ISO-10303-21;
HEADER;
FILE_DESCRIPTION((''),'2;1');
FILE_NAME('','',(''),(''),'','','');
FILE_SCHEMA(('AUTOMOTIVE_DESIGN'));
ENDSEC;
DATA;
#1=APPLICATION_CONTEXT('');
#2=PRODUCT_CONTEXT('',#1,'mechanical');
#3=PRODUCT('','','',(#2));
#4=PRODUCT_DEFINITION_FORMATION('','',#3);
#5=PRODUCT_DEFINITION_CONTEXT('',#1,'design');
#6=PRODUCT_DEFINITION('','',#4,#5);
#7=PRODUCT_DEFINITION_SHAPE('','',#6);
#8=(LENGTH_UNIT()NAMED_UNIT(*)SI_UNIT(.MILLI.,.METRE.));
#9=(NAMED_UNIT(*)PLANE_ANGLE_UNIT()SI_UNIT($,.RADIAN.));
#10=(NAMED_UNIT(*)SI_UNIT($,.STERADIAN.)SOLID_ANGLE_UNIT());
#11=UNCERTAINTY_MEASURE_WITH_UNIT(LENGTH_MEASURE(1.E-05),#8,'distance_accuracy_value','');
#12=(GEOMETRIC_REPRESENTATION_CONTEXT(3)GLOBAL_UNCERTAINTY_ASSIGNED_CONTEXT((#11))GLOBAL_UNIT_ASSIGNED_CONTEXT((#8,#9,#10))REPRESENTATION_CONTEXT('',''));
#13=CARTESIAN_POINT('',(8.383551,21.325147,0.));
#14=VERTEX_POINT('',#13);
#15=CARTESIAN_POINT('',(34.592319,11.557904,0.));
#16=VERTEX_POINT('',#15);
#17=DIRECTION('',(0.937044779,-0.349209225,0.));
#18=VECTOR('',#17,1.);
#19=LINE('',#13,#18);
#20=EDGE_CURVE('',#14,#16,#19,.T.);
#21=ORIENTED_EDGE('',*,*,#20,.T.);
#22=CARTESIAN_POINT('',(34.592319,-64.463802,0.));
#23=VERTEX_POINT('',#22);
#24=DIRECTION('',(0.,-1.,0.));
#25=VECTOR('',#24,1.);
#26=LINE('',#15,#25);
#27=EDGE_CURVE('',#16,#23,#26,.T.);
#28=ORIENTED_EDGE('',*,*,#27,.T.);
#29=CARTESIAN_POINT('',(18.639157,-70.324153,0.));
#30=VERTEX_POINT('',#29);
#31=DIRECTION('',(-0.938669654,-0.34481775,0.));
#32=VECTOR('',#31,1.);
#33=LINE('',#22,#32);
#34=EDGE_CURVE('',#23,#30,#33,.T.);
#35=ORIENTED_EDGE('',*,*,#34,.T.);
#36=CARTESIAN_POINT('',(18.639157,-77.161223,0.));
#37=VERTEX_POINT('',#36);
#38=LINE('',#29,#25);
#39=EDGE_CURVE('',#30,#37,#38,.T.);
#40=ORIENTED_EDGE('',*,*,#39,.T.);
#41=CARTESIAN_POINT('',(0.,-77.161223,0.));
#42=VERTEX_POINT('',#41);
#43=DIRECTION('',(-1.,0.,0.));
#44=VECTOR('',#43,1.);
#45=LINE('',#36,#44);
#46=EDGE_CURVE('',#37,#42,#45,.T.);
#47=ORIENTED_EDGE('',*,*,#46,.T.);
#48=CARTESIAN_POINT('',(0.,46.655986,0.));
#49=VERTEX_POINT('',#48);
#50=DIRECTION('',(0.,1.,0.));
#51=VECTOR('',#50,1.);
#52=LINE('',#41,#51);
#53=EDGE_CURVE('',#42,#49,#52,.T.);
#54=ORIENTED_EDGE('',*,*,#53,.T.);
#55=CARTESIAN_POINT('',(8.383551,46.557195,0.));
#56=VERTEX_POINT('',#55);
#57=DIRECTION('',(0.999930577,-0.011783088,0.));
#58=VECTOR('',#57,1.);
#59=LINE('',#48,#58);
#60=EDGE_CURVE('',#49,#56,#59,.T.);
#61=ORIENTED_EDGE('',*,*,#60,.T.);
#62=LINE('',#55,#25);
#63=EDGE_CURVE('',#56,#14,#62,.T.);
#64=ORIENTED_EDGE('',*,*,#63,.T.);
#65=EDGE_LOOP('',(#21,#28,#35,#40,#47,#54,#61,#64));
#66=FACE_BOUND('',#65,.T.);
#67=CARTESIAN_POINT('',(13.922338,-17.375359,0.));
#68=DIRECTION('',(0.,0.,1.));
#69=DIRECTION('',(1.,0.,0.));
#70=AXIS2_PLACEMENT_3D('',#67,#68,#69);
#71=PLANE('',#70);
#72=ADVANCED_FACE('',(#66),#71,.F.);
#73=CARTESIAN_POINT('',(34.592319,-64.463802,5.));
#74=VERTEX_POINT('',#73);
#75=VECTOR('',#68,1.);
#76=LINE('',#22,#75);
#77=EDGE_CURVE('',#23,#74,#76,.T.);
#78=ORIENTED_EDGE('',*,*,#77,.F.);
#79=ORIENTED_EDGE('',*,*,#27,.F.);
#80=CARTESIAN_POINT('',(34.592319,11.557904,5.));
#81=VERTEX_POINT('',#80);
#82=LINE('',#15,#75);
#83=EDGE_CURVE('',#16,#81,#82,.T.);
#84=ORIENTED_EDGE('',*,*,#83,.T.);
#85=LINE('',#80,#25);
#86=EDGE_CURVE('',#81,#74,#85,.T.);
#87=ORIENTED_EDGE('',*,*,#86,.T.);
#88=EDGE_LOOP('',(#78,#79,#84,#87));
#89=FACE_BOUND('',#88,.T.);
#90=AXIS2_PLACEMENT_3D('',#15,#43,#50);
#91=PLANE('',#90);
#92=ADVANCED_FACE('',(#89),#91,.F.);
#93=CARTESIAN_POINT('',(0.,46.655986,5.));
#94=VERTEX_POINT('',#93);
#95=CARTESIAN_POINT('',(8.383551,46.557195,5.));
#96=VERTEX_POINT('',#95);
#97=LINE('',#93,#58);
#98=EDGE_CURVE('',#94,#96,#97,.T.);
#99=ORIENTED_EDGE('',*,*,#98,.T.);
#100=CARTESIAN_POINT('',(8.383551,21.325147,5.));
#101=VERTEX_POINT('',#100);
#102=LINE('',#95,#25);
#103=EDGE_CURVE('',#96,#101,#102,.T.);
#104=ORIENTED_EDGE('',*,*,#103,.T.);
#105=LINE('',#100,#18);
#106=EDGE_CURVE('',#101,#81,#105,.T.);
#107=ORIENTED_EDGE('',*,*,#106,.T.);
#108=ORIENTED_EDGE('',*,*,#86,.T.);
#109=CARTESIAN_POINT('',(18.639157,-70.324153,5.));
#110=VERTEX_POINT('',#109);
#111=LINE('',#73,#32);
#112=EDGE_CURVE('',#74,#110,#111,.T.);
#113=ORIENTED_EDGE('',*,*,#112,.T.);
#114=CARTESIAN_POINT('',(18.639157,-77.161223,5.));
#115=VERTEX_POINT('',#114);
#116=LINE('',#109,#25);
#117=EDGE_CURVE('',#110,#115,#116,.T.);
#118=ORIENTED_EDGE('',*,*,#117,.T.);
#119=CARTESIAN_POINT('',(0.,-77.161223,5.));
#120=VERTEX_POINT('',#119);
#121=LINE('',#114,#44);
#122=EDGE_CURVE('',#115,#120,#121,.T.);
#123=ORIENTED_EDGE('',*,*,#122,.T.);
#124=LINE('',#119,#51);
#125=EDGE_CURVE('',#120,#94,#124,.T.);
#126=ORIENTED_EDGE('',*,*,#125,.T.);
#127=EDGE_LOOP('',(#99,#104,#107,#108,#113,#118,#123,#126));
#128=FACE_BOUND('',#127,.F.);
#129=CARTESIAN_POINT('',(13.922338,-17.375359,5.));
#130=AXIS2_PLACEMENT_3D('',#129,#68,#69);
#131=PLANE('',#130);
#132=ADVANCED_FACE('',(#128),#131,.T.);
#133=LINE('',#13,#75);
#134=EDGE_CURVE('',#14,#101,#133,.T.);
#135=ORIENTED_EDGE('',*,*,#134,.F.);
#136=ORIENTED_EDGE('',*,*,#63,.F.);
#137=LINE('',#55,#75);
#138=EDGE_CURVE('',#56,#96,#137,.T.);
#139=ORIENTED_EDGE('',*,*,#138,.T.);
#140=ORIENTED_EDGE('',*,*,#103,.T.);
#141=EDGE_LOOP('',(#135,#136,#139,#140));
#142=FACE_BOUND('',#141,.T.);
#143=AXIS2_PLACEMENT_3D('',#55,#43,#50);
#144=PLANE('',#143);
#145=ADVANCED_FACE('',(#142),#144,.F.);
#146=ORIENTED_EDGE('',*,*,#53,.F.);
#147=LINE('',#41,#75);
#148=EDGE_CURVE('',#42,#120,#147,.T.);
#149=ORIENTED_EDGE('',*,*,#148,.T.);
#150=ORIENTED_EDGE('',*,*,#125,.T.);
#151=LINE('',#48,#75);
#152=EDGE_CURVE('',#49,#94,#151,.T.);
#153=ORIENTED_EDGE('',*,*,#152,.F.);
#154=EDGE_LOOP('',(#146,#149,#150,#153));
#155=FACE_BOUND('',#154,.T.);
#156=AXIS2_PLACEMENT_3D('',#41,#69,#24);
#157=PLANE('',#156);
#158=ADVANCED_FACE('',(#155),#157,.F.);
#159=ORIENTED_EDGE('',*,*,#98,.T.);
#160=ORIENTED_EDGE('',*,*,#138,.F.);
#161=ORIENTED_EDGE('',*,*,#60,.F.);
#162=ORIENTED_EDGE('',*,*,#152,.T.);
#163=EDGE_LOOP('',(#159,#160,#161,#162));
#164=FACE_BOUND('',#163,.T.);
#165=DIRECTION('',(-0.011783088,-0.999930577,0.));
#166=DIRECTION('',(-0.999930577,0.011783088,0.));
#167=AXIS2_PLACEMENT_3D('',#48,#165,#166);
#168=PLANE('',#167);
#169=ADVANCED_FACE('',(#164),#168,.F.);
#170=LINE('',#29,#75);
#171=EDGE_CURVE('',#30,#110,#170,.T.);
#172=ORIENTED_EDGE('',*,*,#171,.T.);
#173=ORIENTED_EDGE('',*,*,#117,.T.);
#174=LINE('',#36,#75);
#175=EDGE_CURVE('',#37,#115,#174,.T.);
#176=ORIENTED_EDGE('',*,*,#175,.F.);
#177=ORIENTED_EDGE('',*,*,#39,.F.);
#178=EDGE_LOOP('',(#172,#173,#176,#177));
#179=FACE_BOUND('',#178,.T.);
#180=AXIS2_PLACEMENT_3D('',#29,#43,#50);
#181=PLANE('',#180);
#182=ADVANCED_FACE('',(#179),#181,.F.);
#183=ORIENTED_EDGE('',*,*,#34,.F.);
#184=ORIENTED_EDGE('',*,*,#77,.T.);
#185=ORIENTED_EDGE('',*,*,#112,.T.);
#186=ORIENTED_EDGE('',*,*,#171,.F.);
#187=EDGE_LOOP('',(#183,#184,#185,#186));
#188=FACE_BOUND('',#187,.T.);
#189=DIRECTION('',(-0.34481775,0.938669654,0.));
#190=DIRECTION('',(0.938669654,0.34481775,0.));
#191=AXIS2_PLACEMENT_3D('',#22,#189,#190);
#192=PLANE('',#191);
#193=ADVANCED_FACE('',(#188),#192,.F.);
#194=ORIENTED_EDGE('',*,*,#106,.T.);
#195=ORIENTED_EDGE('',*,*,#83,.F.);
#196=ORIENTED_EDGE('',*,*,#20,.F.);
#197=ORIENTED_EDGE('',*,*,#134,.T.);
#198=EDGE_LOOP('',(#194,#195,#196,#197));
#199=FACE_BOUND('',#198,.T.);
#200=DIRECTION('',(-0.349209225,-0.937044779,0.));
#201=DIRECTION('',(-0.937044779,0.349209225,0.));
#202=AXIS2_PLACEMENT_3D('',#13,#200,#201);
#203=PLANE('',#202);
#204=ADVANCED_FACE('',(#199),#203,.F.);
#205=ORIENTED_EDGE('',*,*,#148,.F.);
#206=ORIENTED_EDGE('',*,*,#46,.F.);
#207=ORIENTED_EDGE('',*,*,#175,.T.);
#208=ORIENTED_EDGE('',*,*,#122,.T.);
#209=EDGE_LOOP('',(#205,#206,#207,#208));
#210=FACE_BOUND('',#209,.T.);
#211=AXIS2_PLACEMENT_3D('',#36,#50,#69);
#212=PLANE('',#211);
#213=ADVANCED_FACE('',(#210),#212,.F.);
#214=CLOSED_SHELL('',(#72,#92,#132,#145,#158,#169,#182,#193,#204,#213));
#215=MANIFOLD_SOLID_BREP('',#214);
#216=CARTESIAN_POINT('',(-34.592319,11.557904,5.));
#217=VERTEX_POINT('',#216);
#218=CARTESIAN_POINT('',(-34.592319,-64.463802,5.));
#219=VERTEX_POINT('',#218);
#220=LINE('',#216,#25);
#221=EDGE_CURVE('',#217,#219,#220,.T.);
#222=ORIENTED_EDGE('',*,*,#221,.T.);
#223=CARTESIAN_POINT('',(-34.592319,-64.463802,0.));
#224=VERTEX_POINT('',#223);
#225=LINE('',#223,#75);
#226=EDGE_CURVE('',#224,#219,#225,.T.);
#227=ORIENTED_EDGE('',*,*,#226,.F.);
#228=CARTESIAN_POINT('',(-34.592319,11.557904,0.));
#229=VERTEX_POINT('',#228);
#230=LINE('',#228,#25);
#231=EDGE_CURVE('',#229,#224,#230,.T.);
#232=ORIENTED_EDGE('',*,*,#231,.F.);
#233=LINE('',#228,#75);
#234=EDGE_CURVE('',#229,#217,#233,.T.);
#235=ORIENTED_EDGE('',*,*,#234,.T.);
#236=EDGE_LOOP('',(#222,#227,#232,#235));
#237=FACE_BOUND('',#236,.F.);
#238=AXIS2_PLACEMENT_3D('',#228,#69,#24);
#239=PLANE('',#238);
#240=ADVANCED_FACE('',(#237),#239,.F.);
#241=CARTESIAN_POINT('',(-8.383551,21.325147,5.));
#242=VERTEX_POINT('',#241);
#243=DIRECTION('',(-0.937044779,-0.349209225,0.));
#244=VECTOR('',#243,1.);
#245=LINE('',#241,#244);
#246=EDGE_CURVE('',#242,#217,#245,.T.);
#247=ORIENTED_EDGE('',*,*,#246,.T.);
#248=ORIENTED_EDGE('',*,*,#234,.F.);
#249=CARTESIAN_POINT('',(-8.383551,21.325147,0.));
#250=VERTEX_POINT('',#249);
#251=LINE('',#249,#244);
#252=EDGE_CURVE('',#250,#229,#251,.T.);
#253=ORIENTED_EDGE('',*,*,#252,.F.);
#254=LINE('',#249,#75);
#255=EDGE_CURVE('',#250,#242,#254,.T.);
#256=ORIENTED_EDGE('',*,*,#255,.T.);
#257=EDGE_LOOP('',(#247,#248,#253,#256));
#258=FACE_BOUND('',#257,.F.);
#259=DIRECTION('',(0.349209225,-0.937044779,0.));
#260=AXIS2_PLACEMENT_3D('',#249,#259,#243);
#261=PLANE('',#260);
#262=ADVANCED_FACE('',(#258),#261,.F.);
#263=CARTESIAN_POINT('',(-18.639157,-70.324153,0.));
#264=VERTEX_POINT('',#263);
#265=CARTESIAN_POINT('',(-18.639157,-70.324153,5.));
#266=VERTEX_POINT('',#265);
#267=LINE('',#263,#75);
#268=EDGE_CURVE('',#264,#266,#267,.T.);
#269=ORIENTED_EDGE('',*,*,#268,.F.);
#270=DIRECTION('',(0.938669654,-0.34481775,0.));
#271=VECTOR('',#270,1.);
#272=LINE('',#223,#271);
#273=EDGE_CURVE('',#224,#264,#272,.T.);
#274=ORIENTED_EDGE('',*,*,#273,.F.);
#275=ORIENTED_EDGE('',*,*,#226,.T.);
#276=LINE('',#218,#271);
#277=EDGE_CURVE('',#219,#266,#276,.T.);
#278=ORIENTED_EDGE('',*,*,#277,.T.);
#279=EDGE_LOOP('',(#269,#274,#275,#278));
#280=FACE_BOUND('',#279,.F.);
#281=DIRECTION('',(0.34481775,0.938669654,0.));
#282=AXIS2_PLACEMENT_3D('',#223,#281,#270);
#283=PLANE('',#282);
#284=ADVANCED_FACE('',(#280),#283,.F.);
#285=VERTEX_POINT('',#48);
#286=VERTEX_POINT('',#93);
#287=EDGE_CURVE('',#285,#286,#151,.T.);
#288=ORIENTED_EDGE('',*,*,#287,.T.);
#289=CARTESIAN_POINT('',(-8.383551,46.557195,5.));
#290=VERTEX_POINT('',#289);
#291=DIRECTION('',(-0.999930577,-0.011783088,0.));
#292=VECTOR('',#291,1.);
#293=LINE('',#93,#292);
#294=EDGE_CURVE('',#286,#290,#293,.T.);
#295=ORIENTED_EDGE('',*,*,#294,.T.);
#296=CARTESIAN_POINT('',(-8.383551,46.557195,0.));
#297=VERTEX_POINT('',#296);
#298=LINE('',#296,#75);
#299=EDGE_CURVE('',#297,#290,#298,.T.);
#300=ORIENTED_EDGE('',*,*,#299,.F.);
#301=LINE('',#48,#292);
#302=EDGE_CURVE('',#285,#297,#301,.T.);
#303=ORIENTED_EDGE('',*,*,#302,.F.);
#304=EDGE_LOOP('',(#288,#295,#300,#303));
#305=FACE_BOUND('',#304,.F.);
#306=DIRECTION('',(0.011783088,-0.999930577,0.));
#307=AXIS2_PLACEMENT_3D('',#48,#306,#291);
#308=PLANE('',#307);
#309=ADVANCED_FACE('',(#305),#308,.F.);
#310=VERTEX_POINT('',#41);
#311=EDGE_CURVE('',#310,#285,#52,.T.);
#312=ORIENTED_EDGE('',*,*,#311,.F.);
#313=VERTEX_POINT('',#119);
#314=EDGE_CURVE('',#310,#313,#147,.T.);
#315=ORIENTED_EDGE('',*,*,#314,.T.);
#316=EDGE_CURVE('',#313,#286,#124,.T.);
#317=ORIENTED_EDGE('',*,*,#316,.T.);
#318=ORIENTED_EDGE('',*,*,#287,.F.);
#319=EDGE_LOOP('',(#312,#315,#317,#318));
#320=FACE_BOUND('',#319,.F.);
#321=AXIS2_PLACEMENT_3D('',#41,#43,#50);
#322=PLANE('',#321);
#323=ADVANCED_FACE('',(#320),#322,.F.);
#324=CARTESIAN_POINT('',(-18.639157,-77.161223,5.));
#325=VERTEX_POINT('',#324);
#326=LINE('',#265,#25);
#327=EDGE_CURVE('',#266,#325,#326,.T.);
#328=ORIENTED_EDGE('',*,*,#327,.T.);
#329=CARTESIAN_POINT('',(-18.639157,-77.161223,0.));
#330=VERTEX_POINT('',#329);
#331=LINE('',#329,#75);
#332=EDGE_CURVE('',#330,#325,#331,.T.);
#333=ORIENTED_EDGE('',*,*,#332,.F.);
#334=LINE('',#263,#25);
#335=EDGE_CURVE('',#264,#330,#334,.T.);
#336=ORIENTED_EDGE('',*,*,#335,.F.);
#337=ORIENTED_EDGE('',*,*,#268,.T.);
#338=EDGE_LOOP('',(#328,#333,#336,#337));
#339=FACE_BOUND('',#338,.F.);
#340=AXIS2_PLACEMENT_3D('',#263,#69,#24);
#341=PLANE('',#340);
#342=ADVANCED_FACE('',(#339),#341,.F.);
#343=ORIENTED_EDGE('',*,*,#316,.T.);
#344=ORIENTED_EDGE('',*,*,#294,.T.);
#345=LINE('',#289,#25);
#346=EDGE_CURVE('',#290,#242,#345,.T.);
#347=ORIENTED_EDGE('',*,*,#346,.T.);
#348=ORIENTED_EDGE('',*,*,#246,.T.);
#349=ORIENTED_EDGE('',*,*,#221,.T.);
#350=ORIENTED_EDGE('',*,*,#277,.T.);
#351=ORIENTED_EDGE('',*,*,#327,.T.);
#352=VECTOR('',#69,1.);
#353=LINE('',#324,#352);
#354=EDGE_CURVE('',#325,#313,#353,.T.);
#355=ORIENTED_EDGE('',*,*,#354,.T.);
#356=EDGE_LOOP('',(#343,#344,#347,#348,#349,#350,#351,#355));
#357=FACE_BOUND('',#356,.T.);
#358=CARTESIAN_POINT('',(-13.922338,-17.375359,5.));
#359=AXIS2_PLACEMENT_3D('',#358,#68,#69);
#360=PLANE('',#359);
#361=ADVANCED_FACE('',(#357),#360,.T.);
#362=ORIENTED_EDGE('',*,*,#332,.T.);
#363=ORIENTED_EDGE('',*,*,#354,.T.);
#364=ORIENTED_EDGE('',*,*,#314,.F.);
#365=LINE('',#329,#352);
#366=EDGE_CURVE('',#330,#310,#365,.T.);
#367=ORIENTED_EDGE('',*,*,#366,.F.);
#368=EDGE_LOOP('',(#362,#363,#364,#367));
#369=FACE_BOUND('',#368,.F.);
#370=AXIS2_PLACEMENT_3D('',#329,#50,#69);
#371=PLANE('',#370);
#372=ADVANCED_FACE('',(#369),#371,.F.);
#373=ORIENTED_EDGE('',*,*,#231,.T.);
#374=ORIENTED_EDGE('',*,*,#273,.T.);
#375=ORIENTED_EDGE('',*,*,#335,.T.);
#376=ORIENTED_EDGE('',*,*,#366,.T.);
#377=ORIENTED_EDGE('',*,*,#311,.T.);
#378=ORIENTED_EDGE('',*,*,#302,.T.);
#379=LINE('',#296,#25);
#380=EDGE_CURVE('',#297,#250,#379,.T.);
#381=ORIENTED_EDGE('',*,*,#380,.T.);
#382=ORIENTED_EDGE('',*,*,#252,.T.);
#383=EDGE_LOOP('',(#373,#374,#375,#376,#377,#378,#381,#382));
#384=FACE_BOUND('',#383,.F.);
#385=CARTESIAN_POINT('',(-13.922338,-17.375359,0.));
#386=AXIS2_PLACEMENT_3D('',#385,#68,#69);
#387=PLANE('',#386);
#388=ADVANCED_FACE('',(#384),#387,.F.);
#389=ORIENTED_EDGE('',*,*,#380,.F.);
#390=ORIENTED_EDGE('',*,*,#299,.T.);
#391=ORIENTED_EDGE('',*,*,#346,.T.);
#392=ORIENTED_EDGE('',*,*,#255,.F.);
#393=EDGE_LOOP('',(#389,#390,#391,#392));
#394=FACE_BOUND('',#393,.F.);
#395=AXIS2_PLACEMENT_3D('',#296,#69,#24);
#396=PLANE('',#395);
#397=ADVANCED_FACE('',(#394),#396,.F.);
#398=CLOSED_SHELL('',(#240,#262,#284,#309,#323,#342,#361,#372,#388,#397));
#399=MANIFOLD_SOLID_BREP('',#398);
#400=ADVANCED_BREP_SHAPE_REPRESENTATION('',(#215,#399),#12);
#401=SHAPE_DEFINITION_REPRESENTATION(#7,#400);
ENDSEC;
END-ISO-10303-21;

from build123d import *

# Parameters (mm, degrees)
F1_DEPTH = 5


# Not quite as in the source:
# - a pattern or mirror of a feature is missing from the dataset's text; its kind, count and spacing are read off the source's solid
# - a feature names something its author has since deleted; it is built from what else it names


with BuildPart() as f1:
    # F0 (on Top) → F1 (new body)
    with BuildSketch(Plane.XY):
        Polygon((0, 46.6559864581), (-8.3835506812, 46.5571954846), (-8.3835506812, 21.3251467794), (-34.5923192799, 11.5579040721), (-34.5923192799, -64.463801682), (-18.6391565949, -70.3241527081), (-18.6391565949, -77.1612226963), (0, -77.1612226963), align=None)
    extrude(amount=F1_DEPTH)


with BuildPart() as f1_copies_1:
    # F1_copies: instance of F1
    add(f1.part.mirror(Plane(origin=(0, 0, 0), x_dir=(0, 0, 1), z_dir=(1, 0, 0))))


solid = Compound([f1.part, f1_copies_1.part])
